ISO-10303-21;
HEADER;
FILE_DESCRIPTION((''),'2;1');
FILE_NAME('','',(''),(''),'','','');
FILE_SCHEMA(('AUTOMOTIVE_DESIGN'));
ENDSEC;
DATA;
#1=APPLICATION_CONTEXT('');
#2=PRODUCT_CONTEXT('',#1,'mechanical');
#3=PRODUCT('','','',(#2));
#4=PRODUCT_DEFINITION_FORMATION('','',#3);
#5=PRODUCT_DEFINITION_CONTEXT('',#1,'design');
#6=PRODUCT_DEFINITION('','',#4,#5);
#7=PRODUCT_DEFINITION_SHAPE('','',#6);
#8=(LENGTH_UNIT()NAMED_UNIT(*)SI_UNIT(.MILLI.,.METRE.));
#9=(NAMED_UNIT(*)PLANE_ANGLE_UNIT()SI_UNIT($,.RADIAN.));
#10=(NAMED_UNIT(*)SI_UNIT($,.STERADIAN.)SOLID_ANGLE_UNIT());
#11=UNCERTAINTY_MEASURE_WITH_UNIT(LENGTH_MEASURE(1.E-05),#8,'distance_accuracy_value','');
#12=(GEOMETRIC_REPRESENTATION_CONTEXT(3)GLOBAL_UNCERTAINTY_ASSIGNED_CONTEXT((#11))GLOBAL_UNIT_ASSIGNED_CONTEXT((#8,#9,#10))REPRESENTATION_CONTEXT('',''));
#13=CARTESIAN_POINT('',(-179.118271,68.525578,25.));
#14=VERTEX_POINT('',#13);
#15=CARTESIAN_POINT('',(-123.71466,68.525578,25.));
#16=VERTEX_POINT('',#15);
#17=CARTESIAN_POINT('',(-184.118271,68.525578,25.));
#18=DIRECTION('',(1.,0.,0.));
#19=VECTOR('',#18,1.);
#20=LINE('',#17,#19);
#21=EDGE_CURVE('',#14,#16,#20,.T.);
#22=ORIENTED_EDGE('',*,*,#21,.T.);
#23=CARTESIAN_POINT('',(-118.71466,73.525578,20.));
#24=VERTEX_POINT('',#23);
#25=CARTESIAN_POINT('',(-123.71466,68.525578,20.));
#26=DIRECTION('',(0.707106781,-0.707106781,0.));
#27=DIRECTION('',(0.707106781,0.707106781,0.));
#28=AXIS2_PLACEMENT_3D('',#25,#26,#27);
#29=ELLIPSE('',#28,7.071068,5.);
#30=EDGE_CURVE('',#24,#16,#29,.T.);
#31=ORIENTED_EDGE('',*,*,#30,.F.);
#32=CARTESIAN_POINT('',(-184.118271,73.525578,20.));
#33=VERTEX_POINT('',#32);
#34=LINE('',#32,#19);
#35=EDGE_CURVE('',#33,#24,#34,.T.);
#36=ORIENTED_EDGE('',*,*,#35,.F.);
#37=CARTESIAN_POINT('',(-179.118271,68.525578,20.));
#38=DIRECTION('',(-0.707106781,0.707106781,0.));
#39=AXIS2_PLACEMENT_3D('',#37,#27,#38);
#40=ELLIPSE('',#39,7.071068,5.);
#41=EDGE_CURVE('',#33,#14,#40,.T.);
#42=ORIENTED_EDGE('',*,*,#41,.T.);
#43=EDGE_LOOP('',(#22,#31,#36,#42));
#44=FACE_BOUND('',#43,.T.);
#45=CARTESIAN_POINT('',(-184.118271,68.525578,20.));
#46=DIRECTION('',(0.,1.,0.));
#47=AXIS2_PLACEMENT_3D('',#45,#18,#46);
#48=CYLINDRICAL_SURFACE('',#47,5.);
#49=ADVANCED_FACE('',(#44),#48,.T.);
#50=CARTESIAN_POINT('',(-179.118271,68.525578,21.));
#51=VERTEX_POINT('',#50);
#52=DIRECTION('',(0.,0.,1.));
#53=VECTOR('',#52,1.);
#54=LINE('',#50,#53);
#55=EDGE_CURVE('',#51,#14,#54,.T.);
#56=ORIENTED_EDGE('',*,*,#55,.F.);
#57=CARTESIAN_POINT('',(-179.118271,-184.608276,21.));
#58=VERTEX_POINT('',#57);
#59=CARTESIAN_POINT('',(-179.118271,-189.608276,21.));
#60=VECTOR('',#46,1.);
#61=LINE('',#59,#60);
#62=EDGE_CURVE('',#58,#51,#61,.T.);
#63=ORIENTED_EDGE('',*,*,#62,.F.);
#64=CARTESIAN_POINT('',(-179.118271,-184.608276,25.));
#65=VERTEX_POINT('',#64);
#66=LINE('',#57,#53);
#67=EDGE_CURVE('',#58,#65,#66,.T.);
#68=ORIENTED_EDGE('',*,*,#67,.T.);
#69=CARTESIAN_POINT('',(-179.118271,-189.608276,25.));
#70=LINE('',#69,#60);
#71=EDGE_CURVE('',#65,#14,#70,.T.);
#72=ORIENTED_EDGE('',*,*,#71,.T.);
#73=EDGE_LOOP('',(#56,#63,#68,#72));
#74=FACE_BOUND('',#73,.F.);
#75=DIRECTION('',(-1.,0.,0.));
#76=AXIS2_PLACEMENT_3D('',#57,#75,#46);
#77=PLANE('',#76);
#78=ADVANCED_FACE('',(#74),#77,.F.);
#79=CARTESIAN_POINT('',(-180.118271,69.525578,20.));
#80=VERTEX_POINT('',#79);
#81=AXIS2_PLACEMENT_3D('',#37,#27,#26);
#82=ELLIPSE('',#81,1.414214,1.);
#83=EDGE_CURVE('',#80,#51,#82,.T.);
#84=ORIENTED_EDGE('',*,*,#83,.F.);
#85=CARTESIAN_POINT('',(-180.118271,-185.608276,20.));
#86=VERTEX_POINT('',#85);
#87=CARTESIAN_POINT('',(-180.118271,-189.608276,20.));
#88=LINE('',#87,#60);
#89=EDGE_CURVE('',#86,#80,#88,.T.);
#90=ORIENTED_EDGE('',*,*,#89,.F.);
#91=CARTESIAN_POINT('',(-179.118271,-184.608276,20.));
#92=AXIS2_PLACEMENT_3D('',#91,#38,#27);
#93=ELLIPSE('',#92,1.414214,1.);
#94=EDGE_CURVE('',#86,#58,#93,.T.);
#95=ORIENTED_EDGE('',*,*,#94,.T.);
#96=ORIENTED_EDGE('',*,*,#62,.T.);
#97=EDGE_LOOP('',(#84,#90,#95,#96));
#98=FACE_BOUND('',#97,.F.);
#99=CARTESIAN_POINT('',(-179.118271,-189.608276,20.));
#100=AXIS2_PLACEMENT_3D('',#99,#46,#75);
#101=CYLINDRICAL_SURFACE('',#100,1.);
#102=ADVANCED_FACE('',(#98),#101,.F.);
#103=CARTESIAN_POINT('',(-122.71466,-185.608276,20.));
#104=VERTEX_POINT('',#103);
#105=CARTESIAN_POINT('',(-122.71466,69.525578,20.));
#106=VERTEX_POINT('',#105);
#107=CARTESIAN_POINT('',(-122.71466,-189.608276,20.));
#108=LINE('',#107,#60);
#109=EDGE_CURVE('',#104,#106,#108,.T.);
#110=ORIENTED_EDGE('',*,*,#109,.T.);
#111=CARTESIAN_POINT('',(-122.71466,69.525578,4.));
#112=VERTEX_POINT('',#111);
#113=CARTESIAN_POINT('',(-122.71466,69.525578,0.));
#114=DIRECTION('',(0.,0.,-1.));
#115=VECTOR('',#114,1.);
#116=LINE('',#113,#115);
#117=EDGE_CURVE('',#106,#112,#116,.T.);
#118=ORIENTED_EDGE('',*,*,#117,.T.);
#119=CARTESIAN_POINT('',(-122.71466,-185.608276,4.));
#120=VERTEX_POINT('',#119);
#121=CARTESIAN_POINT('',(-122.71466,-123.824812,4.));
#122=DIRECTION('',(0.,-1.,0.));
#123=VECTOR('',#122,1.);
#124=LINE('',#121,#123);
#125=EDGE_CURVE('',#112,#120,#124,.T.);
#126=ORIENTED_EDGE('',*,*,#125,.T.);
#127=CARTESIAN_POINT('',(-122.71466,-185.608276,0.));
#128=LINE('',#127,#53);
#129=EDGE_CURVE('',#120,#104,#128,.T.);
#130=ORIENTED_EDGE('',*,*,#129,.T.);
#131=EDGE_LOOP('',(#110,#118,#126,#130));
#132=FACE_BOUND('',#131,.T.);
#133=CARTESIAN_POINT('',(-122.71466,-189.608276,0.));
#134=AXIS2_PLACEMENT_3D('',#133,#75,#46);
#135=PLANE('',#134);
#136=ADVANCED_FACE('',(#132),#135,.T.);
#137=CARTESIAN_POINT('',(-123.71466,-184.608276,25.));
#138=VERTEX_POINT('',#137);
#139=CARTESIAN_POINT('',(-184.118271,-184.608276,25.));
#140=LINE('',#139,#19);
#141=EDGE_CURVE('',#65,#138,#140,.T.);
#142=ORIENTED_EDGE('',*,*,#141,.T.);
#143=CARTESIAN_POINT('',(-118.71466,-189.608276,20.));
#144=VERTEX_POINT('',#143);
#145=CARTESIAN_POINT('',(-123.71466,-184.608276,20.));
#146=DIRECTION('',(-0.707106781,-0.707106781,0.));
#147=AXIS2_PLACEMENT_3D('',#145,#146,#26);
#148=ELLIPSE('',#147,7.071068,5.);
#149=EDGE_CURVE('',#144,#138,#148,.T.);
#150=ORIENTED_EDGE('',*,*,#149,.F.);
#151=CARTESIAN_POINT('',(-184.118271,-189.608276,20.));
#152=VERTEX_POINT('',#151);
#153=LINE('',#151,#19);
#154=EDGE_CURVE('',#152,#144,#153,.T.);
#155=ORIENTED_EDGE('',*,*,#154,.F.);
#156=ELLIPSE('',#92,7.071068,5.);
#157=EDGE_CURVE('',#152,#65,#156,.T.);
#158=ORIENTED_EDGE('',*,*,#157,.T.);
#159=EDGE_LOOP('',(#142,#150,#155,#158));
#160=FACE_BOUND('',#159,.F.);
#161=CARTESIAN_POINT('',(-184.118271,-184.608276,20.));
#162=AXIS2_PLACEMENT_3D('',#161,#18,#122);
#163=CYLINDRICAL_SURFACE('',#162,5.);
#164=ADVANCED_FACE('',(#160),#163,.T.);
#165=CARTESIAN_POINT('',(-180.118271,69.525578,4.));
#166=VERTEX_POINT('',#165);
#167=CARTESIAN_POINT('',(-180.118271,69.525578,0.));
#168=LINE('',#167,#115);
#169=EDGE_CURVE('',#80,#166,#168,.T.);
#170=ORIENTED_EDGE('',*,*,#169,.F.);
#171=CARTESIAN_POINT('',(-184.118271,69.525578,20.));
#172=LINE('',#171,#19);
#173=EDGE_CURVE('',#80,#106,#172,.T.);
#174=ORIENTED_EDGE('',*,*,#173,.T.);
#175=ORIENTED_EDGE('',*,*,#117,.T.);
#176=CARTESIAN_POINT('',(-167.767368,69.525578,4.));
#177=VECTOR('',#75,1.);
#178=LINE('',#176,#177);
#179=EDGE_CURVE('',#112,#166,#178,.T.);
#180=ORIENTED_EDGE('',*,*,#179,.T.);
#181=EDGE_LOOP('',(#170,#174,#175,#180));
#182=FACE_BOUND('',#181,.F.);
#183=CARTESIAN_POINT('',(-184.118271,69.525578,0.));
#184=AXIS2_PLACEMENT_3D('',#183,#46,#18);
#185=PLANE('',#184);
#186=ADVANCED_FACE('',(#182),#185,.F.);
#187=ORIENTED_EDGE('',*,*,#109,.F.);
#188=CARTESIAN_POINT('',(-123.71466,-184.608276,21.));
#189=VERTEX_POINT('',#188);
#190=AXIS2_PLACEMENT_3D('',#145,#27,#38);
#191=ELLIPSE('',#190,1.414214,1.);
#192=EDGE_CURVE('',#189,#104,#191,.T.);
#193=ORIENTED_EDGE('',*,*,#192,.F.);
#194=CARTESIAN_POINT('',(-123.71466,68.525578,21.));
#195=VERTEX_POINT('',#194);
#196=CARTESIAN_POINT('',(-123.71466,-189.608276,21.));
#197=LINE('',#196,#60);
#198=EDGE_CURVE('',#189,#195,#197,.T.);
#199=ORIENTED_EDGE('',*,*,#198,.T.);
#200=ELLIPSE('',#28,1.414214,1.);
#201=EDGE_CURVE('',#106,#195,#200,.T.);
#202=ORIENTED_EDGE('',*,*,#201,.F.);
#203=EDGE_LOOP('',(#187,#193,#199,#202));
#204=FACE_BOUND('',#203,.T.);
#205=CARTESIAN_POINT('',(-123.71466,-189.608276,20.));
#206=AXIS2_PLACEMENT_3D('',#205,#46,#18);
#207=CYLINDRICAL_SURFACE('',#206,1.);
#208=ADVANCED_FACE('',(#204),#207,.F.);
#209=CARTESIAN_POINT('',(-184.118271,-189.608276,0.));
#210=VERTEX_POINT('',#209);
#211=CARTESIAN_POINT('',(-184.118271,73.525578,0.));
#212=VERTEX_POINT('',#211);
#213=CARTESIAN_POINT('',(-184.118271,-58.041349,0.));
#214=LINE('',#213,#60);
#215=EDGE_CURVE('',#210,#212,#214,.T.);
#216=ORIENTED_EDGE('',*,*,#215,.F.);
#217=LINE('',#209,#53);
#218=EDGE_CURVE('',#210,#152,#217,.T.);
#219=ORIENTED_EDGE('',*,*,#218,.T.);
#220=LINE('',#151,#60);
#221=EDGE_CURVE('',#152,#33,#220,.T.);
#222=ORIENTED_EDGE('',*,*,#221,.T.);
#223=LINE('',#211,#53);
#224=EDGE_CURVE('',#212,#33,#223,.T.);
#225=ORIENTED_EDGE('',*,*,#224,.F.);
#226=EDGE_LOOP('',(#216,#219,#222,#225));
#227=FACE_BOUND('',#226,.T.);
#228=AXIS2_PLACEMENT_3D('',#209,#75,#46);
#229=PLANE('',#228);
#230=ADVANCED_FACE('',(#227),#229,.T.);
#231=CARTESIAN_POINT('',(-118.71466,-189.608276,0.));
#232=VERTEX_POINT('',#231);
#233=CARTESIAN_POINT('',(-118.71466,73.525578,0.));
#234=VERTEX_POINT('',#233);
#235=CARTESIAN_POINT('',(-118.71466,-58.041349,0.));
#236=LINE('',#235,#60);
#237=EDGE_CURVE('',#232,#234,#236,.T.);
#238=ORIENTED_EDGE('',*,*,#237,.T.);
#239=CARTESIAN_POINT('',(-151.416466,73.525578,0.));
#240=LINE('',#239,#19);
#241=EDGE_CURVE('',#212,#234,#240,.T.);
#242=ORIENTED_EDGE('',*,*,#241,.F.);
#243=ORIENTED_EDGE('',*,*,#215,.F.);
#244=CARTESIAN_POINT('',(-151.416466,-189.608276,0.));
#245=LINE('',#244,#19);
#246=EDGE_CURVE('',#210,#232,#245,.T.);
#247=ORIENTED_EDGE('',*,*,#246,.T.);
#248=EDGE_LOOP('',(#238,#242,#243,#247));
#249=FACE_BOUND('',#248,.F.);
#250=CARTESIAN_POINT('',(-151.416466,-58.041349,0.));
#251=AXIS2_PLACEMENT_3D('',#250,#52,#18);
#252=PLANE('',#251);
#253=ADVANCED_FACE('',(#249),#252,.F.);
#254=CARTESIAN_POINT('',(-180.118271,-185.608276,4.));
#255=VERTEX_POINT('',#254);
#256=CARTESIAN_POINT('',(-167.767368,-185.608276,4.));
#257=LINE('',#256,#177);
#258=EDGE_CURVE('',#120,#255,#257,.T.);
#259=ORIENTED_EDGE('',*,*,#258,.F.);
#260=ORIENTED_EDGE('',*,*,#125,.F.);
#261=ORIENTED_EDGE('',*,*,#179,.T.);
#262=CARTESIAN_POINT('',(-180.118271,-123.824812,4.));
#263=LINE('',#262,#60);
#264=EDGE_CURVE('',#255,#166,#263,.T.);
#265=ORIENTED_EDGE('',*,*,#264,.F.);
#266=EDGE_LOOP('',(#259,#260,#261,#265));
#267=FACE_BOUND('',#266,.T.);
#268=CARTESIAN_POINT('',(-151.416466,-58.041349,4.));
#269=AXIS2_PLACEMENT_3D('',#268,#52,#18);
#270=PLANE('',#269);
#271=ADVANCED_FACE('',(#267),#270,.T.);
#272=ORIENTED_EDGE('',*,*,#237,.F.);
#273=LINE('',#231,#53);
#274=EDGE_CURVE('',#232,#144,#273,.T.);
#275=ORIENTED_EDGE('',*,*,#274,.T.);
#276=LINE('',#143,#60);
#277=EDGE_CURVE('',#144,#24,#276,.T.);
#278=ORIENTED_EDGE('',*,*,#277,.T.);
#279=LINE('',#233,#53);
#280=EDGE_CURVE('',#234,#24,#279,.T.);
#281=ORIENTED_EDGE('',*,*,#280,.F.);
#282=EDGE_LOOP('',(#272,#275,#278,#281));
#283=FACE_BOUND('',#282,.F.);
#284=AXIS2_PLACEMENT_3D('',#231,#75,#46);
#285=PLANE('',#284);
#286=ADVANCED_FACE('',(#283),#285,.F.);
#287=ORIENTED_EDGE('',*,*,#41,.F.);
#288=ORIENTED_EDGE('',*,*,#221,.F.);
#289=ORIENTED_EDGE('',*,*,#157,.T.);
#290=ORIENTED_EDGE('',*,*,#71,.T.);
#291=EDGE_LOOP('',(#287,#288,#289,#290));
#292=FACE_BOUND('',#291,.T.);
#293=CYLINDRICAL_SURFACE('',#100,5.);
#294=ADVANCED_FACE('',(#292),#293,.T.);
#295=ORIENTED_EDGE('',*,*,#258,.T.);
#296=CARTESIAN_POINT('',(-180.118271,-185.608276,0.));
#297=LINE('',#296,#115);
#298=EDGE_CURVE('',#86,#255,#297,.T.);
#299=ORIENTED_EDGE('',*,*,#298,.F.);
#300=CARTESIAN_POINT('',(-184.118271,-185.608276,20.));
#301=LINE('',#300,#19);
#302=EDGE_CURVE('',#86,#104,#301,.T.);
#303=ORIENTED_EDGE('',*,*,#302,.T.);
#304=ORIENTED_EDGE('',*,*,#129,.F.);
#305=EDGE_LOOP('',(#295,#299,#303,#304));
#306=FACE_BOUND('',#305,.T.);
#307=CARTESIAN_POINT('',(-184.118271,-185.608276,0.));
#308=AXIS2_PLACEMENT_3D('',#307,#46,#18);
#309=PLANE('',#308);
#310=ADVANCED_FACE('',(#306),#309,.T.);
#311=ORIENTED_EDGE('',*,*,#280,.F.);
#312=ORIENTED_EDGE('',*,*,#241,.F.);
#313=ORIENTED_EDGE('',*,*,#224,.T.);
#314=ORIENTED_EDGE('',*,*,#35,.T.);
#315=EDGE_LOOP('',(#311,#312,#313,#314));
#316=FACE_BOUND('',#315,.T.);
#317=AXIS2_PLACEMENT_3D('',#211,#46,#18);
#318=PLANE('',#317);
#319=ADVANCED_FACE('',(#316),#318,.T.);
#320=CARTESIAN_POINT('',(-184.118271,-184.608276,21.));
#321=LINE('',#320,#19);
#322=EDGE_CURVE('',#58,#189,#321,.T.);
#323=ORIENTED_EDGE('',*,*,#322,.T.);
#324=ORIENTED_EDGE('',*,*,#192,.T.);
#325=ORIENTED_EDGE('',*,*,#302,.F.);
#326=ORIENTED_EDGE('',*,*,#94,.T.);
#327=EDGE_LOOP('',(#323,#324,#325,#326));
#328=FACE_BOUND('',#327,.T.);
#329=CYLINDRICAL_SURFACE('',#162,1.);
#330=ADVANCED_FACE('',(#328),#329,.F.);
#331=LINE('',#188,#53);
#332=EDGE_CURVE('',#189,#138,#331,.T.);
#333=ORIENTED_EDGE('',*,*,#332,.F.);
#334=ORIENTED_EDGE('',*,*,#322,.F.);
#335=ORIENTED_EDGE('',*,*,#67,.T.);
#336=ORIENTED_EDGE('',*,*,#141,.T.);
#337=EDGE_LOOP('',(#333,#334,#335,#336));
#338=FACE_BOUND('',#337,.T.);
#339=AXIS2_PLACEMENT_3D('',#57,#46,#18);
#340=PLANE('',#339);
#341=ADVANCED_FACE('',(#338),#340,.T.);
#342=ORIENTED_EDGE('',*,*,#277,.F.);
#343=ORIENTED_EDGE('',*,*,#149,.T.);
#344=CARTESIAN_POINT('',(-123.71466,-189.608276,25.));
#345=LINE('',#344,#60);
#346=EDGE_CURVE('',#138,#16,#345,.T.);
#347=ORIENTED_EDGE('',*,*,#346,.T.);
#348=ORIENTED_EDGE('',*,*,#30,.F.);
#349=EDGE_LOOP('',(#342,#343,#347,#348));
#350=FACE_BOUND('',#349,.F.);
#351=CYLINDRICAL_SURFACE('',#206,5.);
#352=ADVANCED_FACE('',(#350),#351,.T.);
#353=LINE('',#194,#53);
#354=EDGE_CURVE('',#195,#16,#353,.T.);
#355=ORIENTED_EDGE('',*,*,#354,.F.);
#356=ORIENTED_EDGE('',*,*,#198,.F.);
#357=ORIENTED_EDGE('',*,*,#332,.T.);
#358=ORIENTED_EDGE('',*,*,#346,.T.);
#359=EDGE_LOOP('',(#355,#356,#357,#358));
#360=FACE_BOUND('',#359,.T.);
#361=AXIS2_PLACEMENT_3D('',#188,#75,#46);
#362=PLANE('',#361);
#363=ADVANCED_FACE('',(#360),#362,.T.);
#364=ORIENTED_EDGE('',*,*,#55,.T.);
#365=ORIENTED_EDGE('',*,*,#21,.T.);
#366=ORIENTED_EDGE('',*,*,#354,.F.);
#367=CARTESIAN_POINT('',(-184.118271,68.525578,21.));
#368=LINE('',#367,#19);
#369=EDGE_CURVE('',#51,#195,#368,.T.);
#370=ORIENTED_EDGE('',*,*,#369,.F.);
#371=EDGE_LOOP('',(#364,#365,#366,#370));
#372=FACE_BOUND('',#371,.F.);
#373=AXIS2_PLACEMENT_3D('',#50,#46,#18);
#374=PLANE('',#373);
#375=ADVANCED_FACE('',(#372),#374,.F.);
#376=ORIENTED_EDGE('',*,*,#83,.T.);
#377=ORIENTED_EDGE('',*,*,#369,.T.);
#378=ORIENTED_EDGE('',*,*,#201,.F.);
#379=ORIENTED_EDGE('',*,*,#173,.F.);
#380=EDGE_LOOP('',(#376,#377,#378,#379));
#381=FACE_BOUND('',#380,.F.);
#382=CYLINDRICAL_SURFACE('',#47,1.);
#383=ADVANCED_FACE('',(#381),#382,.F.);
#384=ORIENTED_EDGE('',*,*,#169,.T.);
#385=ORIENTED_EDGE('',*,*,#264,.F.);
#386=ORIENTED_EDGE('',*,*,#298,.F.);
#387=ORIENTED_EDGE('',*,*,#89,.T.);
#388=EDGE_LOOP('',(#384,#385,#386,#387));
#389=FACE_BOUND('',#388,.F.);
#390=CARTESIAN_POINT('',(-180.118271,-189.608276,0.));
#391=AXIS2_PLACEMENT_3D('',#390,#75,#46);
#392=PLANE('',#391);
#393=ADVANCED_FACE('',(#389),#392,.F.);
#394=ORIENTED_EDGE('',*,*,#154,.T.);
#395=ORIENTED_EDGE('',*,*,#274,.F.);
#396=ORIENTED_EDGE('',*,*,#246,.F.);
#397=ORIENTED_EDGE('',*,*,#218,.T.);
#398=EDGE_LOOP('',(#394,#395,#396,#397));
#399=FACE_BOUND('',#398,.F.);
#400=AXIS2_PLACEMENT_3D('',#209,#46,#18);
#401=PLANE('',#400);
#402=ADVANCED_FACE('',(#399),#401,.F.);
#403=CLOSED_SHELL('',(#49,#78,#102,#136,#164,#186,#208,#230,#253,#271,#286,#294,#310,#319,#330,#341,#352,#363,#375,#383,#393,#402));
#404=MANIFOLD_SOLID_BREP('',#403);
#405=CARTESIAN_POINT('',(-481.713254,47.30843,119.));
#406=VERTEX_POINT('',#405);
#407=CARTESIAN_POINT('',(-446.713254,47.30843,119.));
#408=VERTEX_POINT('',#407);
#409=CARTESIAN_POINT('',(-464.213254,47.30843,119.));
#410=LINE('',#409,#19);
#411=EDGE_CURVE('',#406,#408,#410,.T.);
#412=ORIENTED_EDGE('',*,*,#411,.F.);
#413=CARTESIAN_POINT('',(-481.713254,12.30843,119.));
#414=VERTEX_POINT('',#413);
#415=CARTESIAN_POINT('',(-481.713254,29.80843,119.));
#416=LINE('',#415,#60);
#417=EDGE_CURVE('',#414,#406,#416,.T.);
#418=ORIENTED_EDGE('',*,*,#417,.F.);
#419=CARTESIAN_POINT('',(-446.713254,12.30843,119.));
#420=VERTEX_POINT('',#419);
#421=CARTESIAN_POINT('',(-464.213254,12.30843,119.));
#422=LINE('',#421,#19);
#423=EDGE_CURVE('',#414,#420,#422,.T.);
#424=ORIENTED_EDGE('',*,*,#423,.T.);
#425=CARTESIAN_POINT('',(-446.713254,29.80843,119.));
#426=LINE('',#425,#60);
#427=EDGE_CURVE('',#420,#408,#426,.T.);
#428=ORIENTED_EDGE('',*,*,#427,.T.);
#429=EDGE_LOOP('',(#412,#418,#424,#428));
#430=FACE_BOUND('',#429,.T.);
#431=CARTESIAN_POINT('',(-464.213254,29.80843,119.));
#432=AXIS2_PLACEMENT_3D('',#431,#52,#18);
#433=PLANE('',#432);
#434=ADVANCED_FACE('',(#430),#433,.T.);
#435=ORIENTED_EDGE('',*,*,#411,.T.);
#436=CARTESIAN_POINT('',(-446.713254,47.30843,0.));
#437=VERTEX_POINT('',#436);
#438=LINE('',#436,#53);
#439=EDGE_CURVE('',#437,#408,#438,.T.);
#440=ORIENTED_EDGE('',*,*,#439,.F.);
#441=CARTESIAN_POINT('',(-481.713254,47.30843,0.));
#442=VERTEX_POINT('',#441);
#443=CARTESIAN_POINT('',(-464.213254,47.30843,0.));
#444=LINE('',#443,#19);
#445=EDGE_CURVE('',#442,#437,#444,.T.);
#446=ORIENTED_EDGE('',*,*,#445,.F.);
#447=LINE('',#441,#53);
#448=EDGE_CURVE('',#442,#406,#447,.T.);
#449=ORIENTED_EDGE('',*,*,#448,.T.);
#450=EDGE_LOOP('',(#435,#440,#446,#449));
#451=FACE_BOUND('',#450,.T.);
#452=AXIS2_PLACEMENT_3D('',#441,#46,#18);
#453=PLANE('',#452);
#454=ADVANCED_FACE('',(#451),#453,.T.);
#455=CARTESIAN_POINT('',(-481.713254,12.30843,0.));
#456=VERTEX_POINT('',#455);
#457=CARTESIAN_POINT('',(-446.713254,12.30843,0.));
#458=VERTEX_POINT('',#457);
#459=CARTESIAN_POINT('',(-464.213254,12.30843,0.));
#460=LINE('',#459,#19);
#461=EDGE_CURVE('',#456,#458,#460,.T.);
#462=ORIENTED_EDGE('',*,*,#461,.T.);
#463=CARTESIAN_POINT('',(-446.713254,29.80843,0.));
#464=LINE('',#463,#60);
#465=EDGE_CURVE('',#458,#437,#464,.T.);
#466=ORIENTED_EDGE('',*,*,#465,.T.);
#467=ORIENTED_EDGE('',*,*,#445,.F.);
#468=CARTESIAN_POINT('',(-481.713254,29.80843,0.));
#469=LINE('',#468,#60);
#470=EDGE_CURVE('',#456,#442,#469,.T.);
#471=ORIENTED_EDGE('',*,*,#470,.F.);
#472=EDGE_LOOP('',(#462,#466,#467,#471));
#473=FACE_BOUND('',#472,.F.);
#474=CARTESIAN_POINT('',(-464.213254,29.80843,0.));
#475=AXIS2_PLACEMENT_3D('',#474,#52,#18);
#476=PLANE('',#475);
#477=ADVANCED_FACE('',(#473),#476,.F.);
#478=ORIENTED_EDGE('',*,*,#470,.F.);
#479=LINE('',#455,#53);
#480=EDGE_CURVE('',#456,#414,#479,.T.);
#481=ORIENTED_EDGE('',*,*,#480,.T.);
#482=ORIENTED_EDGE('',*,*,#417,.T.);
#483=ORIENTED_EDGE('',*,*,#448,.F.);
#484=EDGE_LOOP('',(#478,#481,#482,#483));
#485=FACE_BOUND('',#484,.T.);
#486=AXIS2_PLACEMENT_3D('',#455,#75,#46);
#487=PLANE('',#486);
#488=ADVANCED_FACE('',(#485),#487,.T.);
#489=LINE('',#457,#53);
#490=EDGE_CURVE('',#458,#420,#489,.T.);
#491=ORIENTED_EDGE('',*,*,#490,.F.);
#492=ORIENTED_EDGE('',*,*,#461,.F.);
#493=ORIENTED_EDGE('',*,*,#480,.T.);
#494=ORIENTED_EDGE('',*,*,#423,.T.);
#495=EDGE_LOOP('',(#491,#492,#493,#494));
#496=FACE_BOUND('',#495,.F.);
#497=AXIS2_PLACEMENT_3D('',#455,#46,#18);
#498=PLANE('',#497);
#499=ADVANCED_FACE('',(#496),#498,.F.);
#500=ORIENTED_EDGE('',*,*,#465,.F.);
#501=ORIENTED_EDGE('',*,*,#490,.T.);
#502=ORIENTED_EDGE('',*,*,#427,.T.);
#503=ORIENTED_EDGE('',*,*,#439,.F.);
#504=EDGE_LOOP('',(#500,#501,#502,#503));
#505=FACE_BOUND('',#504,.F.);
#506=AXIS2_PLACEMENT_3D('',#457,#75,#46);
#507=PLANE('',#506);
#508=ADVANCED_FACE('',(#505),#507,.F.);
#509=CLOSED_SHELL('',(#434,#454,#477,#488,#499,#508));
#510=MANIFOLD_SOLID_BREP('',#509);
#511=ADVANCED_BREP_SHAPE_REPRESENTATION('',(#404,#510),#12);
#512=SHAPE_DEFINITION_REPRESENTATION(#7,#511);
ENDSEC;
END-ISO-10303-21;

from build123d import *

# Parameters (mm, degrees)
F0_W     = 65.4036104679
F0_H     = 263.1338536739
F1_DEPTH = 25
F2_R     = 5
F3_T     = -4
F4_W     = 35
F4_H     = 35
F5_DEPTH = 119


# Not quite as in the source:
# - a shell that OpenCascade refuses in one call is made with other operations: the cavity is built on its own and cut out


with BuildPart() as f1:
    # F0 (on Top) → F1 (new body)
    with BuildSketch(Plane.XY):
        with Locations((-151.4164656401, -58.0413490534)):
            Rectangle(F0_W, F0_H)
    extrude(amount=F1_DEPTH)

    # F2
    f2_edges = [f1.edges().sort_by_distance(p)[0] for p in [
        (-184.118271, -58.041349, 25),
        (-151.416466, -189.608276, 25),
        (-118.71466, -58.041349, 25),
        (-151.416466, 73.525578, 25),
    ]]
    fillet(f2_edges, radius=F2_R)

    # F3: a shell. OpenCascade refuses it in one call, so the cavity is built on its own and cut out:
    # the body offset inwards by the wall thickness, plus a prism from it out through each open face.
    f3_core = offset(f1.part, amount=F3_T, mode=Mode.PRIVATE)
    f3_exits = [f3_core.faces().sort_by_distance(p)[0] for p in [
        (-151.416466, -58.041349, 21),
    ]]
    add(f3_core, mode=Mode.SUBTRACT)
    extrude(f3_exits, amount=-F3_T, mode=Mode.SUBTRACT)


with BuildPart() as f5:
    # F4 (on Top) → F5 (new body)
    with BuildSketch(Plane.XY):
        with Locations((-464.2132538557, 29.8084301734)):
            Rectangle(F4_W, F4_H)
    extrude(amount=F5_DEPTH)


solid = Compound([f1.part, f5.part])
